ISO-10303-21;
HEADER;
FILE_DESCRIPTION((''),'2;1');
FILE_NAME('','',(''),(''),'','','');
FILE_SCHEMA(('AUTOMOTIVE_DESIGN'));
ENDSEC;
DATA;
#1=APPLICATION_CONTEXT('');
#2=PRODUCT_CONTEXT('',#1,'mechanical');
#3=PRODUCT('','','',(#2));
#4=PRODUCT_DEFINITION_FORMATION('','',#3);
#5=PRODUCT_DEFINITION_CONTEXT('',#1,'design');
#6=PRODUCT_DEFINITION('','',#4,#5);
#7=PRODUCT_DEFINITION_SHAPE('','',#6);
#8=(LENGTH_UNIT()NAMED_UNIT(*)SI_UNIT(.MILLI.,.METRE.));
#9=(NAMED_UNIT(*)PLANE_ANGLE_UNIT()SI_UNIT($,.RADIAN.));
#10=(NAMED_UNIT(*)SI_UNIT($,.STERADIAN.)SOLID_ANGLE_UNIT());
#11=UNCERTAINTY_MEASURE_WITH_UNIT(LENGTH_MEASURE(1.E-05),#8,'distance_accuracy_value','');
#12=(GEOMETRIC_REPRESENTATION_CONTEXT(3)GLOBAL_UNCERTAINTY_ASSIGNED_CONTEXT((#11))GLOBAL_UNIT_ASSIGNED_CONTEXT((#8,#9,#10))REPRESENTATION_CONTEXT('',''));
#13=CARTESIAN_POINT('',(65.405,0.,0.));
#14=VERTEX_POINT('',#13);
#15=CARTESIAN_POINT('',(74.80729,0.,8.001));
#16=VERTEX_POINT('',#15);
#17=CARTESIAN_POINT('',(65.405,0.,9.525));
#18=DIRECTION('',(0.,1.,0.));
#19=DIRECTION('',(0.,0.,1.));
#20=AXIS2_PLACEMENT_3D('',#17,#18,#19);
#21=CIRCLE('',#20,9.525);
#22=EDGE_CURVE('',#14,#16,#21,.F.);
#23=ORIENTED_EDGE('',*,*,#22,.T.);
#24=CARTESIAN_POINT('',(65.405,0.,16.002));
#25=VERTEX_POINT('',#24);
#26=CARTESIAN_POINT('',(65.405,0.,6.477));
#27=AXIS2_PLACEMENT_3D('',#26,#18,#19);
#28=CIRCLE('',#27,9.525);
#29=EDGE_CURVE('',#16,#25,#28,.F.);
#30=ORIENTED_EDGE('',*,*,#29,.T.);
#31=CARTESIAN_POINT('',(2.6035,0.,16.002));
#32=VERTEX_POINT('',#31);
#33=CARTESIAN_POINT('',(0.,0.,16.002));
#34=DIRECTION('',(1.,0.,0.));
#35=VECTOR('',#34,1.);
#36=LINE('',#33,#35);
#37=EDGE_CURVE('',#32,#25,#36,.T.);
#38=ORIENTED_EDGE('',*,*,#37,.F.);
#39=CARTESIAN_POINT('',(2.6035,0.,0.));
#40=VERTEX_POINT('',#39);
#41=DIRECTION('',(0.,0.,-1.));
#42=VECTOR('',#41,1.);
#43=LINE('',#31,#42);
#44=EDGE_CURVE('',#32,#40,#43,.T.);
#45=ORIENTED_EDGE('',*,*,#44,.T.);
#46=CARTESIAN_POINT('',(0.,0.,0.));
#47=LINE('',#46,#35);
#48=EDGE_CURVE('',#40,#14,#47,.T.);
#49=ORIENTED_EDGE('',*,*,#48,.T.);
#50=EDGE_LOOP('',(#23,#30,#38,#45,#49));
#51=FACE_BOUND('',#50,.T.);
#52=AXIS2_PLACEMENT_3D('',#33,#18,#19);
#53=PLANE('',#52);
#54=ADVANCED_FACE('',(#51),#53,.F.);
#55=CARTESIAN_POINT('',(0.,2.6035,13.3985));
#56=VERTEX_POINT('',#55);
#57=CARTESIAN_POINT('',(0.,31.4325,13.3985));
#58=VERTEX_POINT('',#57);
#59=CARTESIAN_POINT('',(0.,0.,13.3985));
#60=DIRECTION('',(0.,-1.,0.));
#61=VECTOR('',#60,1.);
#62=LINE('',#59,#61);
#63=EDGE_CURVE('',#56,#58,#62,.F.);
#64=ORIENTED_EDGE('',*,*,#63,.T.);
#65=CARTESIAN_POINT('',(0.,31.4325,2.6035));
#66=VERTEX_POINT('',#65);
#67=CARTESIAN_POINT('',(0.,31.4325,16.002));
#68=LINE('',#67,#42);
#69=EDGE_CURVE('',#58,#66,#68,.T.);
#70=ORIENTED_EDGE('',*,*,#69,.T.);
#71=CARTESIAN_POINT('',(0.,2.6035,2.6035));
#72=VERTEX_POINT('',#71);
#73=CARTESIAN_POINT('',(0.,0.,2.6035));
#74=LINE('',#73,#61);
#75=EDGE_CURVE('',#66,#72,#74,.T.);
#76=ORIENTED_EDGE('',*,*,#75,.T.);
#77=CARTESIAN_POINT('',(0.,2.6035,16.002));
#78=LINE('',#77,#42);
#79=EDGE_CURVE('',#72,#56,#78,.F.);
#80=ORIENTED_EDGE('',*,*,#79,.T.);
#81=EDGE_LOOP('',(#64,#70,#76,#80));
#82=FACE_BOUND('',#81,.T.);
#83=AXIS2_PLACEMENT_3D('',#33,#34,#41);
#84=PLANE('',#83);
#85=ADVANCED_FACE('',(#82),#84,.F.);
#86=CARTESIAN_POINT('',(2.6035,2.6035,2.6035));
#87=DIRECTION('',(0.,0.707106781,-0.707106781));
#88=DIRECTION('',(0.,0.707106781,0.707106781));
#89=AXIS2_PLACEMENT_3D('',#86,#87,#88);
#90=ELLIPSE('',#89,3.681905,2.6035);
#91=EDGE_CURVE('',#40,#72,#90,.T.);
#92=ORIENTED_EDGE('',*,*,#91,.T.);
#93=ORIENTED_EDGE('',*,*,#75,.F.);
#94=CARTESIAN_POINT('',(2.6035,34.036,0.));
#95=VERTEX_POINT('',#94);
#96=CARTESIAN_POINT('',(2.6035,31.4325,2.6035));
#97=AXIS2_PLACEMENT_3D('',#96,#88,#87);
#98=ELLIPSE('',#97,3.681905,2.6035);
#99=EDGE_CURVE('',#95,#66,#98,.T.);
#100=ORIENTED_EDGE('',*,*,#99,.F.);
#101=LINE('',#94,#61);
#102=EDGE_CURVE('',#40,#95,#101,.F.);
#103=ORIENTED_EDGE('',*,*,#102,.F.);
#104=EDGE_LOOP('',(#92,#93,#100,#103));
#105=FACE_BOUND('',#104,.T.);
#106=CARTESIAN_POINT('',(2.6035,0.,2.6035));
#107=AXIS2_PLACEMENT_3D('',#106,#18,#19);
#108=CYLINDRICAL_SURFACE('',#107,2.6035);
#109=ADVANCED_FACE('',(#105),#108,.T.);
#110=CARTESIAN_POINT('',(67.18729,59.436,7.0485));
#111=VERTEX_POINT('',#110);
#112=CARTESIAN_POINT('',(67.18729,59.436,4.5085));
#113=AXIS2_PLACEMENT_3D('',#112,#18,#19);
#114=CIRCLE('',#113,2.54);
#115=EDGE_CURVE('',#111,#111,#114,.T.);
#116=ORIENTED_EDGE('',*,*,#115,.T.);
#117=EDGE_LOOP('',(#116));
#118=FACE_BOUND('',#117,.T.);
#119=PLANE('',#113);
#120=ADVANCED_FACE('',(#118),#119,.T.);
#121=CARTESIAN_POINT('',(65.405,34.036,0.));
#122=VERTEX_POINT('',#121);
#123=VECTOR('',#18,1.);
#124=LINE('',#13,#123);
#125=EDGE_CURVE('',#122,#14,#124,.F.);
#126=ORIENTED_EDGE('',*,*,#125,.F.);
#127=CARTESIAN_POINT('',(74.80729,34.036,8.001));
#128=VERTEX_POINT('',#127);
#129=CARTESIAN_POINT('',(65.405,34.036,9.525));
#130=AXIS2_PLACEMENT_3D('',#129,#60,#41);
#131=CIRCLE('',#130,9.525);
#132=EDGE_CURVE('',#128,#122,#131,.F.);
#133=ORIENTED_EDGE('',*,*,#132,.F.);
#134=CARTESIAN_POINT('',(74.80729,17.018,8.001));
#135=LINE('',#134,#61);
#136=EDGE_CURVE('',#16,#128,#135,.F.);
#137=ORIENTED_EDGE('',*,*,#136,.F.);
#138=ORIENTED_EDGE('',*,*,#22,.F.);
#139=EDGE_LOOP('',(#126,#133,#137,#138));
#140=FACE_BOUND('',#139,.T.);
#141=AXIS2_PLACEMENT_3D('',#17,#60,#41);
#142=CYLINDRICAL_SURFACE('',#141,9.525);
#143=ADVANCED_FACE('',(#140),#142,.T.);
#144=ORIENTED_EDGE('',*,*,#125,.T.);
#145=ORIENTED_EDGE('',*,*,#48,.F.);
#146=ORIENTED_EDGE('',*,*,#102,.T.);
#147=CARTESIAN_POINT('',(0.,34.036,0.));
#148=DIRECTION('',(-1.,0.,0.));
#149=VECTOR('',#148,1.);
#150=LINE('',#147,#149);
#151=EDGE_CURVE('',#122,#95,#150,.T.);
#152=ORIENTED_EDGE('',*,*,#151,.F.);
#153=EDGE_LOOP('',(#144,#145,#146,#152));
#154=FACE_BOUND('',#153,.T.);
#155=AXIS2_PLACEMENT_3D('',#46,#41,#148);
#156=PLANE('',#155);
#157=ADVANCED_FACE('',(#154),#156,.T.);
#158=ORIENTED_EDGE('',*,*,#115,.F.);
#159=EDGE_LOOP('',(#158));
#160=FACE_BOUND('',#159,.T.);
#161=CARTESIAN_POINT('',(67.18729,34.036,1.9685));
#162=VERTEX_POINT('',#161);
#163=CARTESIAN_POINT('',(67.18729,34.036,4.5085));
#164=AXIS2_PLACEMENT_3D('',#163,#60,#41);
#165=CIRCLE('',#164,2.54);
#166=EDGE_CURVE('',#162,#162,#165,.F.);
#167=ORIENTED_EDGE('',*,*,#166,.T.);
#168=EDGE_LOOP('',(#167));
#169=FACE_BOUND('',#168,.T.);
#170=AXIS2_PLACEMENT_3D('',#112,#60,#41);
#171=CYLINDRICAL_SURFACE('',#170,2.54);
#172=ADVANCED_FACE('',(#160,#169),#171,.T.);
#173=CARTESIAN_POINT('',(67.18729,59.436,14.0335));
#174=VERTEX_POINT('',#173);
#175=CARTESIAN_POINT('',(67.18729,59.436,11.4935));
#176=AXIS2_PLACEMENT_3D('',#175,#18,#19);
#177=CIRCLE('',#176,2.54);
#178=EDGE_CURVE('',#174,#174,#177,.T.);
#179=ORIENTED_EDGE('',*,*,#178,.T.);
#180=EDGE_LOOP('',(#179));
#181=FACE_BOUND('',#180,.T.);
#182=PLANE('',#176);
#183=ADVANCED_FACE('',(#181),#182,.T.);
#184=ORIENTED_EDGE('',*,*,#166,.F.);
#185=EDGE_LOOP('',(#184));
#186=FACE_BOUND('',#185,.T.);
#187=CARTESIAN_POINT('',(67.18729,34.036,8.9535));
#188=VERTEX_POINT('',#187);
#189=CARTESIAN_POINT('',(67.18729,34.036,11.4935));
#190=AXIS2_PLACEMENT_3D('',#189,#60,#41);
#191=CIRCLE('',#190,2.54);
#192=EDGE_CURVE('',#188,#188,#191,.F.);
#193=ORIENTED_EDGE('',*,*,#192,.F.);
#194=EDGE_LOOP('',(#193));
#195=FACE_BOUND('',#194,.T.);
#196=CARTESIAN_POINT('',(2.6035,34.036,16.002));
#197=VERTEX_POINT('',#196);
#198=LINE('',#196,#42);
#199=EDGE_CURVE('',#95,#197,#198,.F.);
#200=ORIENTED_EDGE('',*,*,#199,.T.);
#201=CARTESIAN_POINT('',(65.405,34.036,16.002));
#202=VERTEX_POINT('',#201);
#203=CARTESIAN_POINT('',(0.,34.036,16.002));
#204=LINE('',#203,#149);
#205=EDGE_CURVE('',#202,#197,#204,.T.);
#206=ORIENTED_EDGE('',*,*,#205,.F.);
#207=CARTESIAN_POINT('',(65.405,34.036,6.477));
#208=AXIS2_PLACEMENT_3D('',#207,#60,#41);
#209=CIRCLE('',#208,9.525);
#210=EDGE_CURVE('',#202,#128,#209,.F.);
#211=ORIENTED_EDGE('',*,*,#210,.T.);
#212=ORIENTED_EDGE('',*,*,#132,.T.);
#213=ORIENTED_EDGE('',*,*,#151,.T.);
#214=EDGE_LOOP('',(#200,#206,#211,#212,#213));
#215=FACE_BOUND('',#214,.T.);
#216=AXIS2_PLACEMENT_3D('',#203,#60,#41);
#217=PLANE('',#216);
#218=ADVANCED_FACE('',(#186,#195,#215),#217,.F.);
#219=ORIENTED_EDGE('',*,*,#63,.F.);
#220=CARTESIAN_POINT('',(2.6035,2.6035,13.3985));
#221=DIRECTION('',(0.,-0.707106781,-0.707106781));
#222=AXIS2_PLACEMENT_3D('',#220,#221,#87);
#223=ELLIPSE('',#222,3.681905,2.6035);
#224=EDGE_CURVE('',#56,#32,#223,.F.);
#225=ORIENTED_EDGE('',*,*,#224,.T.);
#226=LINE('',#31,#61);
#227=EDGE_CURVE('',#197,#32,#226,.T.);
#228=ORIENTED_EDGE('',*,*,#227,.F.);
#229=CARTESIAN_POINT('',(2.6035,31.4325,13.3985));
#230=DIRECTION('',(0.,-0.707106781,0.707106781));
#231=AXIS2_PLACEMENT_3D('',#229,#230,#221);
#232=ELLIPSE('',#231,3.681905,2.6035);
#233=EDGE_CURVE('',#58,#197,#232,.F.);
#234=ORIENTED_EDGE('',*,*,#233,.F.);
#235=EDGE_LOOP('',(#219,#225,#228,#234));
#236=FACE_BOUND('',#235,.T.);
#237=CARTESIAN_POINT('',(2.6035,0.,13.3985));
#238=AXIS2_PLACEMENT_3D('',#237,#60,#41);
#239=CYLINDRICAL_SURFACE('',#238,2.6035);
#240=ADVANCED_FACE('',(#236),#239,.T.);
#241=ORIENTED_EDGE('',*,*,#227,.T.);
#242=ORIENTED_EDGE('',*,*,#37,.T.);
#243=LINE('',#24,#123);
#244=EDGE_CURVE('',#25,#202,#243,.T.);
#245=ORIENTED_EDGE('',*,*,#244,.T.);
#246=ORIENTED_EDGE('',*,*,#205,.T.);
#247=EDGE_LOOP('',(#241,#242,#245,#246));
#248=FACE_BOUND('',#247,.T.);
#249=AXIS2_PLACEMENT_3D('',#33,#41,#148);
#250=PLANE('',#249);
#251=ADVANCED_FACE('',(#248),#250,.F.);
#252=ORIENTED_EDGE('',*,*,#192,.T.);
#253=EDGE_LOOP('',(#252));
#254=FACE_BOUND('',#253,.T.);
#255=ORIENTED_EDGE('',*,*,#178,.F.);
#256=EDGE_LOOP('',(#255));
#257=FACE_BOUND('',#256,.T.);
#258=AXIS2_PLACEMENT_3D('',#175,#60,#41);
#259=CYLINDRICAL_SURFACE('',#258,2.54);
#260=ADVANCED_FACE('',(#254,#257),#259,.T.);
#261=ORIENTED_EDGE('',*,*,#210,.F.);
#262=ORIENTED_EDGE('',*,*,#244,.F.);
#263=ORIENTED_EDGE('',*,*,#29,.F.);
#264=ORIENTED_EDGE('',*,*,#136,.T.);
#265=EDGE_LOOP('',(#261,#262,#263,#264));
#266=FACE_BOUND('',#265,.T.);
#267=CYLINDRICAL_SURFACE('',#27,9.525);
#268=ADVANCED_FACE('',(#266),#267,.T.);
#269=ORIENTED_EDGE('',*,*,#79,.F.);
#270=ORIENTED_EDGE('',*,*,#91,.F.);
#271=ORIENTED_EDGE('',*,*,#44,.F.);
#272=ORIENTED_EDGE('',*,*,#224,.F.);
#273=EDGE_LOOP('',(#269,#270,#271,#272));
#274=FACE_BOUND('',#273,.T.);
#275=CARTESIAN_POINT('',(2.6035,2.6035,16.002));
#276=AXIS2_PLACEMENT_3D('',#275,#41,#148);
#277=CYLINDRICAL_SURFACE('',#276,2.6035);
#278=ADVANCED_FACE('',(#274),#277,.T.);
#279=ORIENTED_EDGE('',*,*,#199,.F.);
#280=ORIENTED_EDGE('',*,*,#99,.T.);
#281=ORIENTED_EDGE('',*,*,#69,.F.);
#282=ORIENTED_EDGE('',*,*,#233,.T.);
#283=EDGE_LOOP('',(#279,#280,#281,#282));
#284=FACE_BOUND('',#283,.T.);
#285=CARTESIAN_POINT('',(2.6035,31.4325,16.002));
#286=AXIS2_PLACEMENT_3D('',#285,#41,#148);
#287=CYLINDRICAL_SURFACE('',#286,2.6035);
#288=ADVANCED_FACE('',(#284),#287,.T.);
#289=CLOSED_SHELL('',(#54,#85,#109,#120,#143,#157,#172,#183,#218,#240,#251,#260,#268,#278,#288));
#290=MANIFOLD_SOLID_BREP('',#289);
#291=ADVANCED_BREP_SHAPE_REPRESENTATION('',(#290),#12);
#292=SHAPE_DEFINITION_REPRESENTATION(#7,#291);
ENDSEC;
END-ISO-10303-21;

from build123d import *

# Parameters (mm, degrees)
SKETCH1_W           = 74.93
SKETCH1_H           = 34.036
BOSS_EXTRUDE1_DEPTH = 16.002
FILLET1_R           = 9.525
SKETCH2_R           = 2.54
BOSS_EXTRUDE2_DEPTH = 25.4
FILLET2_R           = 2.6035


with BuildPart() as part:
    # Sketch1 → Boss-Extrude1 (new body)
    with BuildSketch(Plane.XY):
        with Locations((37.465, 17.018)):
            Rectangle(SKETCH1_W, SKETCH1_H)
    extrude(amount=BOSS_EXTRUDE1_DEPTH)

    # Fillet1
    # the kernel refuses this fillet: 9.525 mm, written as the material it takes off along each edge
    with BuildSketch(Plane(origin=(74.93, -23.8125, 16.002), x_dir=(0, 0, -1), z_dir=(0, 1, 0))) as fillet1_piece_1:
        with BuildLine():
            CenterArc((FILLET1_R, FILLET1_R), FILLET1_R, 180, 90)
            Line((0, FILLET1_R), (0, 0))
            Line((0, 0), (FILLET1_R, 0))
        make_face()
    extrude(amount=81.661, mode=Mode.SUBTRACT)
    with BuildSketch(Plane(origin=(74.93, -23.8125, 0), x_dir=(0, 0, 1), z_dir=(0, 1, 0))) as fillet1_piece_2:
        with BuildLine():
            CenterArc((FILLET1_R, -FILLET1_R), FILLET1_R, 90, 90)
            Line((0, -FILLET1_R), (0, 0))
            Line((0, 0), (FILLET1_R, 0))
        make_face()
    extrude(amount=81.661, mode=Mode.SUBTRACT)

    # Sketch2 → Boss-Extrude2 (add)
    with BuildSketch(Plane(origin=(0, 34.036, 0), x_dir=(1, 0, 0), z_dir=(0, 1, 0))):
        with Locations(Location((67.187289562, -4.5085, 0), (0, 0, 90))):
            Circle(SKETCH2_R)
        with Locations(Location((67.187289562, -11.4935, 0), (0, 0, 90))):
            Circle(SKETCH2_R)
    extrude(amount=BOSS_EXTRUDE2_DEPTH)

    # Fillet2
    fillet2_edges = [part.edges().sort_by_distance(p)[0] for p in [
        (0, 17.018, 16.002),
        (0, 17.018, 0),
        (0, 34.036, 8.001),
        (0, 0, 8.001),
    ]]
    fillet(fillet2_edges, radius=FILLET2_R)


solid = part.part
